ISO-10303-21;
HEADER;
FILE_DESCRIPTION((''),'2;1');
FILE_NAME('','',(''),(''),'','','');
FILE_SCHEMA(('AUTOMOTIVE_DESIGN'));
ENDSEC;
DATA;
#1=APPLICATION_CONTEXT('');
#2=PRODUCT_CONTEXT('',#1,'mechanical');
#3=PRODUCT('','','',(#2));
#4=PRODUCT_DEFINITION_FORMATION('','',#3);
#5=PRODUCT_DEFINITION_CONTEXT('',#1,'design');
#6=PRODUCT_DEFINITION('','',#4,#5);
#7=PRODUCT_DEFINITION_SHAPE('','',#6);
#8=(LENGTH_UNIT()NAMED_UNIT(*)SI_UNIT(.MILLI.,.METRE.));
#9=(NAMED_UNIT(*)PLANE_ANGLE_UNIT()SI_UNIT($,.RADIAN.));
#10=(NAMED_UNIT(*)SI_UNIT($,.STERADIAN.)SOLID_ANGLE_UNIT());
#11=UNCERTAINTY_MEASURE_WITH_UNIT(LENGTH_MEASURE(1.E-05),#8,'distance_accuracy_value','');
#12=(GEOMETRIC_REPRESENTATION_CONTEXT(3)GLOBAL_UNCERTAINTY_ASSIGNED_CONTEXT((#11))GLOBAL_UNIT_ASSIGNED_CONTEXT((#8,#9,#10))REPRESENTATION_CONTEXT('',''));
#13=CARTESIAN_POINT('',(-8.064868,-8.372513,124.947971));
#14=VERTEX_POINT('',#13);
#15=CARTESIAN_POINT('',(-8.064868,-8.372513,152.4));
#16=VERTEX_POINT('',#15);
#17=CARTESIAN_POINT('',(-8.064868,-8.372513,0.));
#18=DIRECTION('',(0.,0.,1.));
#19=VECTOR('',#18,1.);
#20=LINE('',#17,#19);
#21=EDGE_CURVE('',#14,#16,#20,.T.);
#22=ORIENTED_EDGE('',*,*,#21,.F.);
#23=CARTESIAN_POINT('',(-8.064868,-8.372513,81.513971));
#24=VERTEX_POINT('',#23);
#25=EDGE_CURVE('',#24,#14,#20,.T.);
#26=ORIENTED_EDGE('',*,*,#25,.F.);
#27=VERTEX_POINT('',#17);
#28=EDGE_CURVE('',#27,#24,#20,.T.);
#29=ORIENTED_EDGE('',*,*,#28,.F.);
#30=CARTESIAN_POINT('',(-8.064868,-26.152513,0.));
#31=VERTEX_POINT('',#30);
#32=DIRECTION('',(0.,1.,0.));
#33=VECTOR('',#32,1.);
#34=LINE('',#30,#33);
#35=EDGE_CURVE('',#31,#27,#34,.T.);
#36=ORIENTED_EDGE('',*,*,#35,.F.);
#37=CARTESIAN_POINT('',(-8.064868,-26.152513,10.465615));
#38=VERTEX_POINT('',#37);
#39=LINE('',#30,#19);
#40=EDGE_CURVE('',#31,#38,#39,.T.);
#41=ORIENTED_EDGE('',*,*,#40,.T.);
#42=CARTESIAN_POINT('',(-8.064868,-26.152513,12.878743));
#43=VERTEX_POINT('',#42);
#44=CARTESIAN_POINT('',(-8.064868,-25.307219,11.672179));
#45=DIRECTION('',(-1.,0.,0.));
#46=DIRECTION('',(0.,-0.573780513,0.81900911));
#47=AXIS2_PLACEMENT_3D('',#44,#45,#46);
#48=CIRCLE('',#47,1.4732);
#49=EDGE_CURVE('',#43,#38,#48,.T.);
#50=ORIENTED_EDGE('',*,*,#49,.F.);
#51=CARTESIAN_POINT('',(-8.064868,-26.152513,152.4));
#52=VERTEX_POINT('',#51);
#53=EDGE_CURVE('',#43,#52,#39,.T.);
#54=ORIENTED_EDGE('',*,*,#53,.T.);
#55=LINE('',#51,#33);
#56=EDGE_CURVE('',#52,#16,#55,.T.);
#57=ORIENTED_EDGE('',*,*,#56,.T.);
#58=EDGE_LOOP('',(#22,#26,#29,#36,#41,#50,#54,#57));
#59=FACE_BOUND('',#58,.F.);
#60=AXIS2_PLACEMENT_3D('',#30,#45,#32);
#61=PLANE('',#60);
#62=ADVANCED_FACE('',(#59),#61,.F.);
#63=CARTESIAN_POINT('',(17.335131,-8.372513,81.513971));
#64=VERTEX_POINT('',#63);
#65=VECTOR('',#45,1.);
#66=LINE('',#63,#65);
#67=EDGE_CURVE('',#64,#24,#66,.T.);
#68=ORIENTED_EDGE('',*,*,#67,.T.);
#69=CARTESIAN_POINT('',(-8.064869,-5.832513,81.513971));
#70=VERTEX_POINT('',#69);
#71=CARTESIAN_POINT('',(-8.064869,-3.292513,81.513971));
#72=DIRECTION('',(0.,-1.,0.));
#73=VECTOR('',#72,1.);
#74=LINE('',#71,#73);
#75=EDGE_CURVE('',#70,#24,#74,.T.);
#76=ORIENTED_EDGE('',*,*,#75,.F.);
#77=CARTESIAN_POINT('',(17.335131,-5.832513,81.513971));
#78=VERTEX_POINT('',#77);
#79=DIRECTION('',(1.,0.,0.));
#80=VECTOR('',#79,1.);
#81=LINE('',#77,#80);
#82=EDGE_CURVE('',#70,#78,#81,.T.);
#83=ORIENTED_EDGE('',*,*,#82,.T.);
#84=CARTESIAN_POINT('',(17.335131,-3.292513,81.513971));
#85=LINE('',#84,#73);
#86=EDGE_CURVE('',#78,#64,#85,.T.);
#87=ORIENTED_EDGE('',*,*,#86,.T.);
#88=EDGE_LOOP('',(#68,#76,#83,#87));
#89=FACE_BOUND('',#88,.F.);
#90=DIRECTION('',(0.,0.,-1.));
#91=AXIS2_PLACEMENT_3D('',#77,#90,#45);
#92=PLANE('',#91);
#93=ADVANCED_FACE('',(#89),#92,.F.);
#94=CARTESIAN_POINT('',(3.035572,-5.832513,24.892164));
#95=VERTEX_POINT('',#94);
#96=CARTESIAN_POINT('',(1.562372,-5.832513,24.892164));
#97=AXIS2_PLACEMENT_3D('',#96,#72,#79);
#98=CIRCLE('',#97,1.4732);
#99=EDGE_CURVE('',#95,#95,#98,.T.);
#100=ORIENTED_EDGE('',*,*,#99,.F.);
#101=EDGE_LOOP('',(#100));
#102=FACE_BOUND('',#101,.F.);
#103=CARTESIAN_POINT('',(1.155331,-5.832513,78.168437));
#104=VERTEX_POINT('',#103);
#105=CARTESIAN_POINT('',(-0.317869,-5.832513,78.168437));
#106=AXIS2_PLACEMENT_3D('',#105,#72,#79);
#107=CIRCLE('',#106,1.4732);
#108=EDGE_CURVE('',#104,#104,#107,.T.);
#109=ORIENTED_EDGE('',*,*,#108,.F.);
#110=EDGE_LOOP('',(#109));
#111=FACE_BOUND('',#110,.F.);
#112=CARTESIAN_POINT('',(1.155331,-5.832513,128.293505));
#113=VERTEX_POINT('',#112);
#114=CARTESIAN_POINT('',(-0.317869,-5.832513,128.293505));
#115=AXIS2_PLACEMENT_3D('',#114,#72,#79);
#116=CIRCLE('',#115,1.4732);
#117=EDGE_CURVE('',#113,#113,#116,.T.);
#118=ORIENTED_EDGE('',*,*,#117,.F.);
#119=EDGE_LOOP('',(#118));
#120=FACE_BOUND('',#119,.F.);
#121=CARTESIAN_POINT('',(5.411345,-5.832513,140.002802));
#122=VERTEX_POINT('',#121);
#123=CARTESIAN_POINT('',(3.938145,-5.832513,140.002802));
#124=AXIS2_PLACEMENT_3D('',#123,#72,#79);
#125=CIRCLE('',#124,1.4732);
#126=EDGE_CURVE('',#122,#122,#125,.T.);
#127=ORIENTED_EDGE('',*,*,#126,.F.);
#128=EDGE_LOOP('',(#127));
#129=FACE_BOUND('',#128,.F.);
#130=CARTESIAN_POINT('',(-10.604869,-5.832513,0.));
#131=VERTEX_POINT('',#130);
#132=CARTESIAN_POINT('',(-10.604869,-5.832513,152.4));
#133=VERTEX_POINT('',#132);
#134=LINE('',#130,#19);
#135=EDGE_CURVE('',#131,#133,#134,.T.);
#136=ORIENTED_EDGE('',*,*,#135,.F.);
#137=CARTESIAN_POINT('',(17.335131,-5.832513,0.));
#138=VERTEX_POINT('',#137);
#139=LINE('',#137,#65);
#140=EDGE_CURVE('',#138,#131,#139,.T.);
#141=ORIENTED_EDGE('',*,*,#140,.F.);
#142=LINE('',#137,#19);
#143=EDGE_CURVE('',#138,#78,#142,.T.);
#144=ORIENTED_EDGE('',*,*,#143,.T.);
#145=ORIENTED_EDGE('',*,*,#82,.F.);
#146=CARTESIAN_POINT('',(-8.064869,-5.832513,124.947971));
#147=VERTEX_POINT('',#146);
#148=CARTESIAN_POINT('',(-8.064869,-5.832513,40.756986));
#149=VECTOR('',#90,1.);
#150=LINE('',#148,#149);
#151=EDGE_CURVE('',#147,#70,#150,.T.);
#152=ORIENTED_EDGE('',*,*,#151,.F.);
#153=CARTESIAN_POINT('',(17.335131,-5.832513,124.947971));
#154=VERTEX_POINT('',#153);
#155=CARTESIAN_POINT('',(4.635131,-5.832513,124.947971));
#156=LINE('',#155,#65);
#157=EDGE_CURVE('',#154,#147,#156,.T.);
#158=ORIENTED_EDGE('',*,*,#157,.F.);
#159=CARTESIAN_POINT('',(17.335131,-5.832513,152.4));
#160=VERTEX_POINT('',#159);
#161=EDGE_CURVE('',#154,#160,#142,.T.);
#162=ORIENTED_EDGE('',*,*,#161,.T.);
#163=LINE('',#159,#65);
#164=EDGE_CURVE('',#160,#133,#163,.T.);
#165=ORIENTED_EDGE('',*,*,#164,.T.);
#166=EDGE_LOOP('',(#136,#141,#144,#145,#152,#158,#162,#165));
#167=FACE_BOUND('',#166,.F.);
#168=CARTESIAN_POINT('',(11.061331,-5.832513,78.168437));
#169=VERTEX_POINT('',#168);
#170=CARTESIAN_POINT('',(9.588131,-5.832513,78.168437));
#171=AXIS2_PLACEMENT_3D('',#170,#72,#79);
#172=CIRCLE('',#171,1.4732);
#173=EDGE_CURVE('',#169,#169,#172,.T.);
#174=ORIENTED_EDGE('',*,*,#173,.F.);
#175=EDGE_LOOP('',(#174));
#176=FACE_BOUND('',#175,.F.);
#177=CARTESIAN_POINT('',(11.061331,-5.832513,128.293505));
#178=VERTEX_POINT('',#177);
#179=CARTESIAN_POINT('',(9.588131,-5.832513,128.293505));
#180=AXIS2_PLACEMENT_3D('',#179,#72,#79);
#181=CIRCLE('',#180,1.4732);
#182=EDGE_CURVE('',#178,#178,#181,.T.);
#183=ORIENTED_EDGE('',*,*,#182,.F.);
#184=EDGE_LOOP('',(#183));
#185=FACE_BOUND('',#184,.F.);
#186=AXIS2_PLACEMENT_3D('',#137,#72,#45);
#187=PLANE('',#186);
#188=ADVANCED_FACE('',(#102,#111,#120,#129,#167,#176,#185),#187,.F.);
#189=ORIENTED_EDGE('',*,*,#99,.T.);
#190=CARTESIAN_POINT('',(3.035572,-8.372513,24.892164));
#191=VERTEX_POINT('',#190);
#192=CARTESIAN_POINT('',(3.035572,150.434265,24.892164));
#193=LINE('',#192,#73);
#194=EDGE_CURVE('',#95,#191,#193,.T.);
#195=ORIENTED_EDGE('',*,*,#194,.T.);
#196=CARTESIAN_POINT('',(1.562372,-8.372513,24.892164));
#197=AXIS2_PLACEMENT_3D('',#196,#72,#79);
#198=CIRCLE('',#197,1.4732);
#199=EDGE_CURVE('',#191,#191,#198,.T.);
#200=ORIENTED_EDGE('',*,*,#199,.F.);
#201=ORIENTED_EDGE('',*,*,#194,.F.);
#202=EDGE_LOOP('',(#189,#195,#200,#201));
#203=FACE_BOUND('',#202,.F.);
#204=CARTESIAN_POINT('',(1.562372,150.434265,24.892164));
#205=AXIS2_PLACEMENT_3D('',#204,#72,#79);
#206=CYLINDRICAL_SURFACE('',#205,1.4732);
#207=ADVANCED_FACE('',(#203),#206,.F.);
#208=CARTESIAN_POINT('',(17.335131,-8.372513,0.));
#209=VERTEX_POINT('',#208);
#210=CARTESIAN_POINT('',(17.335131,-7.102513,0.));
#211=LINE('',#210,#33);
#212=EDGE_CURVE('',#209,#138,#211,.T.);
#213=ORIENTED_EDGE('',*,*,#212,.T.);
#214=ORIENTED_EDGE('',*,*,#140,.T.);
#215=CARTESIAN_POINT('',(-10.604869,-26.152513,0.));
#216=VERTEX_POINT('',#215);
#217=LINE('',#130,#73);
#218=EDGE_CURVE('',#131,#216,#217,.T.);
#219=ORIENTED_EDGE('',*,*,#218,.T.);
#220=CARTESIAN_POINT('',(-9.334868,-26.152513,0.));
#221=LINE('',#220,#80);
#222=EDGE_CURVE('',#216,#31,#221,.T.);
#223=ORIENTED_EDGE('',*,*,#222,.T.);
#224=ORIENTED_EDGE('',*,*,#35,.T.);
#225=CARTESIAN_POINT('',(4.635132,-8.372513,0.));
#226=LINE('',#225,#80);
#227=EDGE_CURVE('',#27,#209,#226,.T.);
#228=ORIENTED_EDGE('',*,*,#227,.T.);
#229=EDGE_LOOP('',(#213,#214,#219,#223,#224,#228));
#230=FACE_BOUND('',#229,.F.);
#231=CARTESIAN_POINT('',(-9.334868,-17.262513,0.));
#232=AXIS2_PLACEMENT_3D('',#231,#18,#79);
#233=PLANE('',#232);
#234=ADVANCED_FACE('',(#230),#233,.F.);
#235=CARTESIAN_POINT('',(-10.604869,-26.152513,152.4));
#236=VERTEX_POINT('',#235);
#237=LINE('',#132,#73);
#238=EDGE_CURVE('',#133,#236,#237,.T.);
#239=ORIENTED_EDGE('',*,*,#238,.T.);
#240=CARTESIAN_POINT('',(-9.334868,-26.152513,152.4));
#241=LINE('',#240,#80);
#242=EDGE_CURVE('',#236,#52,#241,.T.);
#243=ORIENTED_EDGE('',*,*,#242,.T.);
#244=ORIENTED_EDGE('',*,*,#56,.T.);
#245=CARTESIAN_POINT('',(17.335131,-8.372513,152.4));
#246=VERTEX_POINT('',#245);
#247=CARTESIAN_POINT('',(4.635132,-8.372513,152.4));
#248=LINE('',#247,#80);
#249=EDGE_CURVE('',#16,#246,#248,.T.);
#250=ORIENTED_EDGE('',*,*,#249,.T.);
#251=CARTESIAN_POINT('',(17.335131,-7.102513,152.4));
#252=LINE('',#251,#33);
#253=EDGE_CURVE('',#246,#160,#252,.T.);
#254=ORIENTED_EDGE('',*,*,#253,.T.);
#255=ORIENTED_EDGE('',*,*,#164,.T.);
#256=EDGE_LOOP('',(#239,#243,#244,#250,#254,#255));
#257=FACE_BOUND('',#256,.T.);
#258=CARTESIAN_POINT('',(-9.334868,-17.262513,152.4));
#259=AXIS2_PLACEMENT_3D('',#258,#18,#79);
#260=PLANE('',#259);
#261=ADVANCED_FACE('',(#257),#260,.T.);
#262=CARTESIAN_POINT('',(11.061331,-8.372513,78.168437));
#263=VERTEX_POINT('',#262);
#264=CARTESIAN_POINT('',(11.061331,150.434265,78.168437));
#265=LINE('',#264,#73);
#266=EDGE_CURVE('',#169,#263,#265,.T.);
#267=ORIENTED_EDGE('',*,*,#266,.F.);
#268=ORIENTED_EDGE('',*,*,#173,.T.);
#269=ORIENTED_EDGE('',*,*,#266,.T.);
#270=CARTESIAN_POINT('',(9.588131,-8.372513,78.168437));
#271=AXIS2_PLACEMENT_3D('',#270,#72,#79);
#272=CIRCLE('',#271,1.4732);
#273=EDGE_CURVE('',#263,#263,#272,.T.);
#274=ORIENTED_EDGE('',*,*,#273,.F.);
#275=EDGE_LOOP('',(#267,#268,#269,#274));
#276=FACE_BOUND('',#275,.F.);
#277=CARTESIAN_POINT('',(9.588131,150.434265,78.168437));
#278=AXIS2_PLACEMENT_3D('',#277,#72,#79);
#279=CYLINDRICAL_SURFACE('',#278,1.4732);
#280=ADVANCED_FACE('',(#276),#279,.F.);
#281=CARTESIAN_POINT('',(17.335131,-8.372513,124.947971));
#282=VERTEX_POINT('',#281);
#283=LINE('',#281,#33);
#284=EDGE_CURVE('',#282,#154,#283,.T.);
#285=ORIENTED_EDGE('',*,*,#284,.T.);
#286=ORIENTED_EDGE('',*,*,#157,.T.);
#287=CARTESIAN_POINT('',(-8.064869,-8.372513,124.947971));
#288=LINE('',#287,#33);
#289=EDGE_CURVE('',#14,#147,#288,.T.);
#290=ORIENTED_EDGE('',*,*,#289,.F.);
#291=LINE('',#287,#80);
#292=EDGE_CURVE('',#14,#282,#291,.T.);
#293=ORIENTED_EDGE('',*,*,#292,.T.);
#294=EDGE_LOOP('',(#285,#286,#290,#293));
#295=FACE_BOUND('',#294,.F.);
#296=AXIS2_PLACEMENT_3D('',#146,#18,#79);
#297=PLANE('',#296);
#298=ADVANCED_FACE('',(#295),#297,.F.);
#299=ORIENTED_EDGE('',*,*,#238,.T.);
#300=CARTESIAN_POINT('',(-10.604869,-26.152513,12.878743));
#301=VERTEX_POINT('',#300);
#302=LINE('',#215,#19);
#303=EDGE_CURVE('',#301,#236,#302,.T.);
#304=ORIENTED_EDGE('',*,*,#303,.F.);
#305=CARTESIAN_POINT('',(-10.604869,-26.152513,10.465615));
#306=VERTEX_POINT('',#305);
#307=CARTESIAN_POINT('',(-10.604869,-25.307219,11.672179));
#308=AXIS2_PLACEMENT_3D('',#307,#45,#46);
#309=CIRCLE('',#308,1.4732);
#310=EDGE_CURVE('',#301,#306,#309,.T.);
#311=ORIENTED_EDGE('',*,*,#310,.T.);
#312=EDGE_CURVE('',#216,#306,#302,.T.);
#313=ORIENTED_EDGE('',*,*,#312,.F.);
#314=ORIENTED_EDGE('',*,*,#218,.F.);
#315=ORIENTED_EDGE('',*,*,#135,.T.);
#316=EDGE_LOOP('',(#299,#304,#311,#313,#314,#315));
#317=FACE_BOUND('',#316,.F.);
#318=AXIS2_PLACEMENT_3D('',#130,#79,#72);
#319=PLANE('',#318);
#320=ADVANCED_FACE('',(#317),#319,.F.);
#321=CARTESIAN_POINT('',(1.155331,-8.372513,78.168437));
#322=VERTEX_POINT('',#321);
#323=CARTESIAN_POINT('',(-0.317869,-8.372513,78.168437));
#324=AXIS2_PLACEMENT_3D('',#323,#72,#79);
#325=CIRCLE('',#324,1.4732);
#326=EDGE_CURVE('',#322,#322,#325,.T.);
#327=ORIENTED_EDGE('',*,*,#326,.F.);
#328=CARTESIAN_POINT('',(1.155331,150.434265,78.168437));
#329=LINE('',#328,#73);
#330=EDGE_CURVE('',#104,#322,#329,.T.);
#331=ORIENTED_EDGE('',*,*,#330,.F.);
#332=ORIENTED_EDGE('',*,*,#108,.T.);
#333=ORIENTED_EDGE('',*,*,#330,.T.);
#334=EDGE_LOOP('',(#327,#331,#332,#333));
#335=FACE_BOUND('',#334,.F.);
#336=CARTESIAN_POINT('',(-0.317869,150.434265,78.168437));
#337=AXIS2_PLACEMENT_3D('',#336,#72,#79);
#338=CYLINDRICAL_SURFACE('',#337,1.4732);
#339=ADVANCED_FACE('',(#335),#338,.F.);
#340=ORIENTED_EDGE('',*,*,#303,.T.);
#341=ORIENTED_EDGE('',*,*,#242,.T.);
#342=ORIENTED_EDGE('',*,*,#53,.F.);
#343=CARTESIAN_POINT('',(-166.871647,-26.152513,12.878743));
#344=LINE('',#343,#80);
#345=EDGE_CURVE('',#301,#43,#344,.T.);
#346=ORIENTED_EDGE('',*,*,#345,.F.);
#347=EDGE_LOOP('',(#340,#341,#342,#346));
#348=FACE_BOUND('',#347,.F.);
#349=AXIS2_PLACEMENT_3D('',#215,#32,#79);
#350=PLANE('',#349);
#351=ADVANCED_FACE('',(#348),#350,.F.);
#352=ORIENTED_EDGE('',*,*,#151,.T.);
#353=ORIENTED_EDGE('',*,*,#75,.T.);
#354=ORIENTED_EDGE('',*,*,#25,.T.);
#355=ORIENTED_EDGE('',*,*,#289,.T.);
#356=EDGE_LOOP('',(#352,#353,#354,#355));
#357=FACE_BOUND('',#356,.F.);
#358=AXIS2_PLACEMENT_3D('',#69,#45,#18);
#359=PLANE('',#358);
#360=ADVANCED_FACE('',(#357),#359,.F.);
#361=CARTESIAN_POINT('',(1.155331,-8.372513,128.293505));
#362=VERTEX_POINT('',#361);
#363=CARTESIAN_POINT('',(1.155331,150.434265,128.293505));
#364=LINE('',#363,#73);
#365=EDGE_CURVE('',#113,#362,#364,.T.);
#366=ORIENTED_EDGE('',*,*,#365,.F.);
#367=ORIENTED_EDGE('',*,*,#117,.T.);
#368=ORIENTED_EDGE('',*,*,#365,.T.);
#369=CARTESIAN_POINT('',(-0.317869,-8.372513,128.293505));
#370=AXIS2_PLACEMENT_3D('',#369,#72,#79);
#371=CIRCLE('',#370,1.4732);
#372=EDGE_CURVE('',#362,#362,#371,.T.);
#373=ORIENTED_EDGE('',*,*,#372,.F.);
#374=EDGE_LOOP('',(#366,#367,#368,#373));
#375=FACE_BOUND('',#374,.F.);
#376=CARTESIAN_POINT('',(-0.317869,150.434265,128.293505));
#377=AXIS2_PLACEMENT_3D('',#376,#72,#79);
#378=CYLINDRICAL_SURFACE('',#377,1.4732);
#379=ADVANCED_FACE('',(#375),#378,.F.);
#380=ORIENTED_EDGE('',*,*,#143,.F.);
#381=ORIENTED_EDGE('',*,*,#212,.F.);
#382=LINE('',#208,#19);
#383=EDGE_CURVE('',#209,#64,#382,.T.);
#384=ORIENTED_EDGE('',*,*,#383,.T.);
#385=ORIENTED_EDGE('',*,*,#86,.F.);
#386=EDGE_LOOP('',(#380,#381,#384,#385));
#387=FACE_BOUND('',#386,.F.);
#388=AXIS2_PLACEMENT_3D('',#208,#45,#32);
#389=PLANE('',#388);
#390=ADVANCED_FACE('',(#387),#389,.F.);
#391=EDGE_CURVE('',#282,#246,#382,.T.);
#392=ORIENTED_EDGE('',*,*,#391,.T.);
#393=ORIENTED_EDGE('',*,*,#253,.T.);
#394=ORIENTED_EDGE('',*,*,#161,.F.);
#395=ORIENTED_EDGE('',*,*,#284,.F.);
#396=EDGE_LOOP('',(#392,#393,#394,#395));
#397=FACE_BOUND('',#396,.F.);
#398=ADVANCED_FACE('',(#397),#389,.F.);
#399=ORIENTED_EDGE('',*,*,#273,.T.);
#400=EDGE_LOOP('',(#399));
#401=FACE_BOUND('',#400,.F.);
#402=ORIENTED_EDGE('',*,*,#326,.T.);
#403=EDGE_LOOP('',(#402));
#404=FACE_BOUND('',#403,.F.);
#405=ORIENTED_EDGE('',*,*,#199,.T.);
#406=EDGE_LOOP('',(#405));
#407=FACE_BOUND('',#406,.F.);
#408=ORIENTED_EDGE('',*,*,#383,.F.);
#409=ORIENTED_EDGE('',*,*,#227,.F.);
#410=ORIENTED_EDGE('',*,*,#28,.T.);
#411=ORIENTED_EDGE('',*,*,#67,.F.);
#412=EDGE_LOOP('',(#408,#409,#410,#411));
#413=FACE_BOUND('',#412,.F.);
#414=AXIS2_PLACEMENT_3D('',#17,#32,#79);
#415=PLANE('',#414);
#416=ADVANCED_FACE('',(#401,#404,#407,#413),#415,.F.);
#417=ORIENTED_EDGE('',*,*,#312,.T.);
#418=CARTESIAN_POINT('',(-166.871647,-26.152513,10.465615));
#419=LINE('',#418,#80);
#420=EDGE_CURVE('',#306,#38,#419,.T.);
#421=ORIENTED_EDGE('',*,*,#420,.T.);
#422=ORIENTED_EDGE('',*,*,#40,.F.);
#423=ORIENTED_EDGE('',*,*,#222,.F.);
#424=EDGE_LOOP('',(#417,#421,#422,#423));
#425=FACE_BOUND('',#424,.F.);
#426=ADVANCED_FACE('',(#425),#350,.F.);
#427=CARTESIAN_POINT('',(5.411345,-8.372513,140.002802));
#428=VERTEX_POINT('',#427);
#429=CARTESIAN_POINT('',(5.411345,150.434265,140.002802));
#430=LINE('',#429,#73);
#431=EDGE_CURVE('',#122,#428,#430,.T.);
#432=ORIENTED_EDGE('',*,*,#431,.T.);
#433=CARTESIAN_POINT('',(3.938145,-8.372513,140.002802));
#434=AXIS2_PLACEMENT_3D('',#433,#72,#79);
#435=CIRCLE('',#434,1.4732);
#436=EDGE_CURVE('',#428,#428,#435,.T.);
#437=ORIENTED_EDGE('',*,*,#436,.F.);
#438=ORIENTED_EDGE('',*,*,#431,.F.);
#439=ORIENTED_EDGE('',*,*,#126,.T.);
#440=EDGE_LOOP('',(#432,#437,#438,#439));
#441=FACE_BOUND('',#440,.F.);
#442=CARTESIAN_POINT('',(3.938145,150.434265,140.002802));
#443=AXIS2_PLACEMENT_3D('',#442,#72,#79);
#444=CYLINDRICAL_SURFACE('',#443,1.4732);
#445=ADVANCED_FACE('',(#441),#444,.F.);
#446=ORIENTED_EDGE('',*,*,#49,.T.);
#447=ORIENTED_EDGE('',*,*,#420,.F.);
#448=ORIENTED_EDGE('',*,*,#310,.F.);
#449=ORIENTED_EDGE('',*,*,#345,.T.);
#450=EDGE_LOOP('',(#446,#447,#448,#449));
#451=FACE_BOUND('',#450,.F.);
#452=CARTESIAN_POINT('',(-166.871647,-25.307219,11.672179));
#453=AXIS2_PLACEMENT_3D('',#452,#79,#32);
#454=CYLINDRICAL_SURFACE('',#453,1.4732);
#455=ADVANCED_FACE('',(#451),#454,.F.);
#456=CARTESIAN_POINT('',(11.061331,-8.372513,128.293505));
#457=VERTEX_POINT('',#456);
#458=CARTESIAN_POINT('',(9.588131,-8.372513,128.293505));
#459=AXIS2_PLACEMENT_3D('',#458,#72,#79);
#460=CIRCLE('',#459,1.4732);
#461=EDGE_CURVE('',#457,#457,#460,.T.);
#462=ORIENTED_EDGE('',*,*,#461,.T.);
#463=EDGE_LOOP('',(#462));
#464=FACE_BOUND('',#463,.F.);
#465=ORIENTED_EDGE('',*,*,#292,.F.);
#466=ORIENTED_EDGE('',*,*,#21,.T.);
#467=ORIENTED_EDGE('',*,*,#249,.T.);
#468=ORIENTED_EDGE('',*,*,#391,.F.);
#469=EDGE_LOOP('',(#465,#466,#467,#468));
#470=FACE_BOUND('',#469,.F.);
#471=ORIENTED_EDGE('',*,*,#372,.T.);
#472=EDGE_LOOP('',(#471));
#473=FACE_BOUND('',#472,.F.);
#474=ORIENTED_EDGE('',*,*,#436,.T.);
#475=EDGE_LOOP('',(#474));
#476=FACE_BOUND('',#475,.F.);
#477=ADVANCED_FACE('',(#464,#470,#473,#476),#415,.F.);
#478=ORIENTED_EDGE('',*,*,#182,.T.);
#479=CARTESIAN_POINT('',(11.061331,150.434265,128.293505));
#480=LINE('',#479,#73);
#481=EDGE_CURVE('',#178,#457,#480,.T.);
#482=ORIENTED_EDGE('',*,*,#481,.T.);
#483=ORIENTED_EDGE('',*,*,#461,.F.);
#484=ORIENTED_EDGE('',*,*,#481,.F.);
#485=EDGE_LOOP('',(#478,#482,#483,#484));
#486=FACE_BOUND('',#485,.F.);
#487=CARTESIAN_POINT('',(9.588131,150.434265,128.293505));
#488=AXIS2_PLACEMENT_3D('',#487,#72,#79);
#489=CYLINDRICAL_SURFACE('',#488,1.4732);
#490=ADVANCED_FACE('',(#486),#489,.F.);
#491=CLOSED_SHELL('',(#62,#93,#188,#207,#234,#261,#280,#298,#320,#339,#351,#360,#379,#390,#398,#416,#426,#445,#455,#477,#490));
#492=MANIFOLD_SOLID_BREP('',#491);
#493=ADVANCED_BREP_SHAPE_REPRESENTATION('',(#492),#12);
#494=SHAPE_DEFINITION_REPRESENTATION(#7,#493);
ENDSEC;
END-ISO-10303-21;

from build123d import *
from build123d import SkipClean  # not in build123d's __all__

# Parameters (mm, degrees)
F0_W     = 2.5400003581
F0_H     = 17.78
F0_H_2   = 2.54
F0_W_2   = 25.3999996419
F1_DEPTH = 152.4
F4_D     = 2.9464
F2_W     = 12.7
F2_H     = 21.717
F5_DEPTH = 2.54
F6_D     = 2.9464
F7_D     = 2.9464
F8_D     = 2.9464
F9_D     = 2.9464
F10_D    = 2.9464
F11_D    = 2.9464


# Not quite as in the source:
# - after a boolean that leaves OpenCascade's solid faulty, fix() repairs it
# - a feature names something its author has since deleted; it is built from what else it names


with BuildPart() as f1:
    # F0 (on Top) → F1 (new body)
    with BuildSketch(Plane.XY):
        with Locations((-9.334868336, -17.2625129279)):
            Rectangle(F0_W, F0_H)
        with Locations((-9.334868336, -7.1025129279)):
            Rectangle(F0_W, F0_H_2)
        with Locations((4.635131664, -7.1025129279)):
            Rectangle(F0_W_2, F0_H_2)
    extrude(amount=F1_DEPTH)

    # F4 (through all)
    with Locations(Plane(origin=(0, -5.8325129279, 0), x_dir=(-1, 0, 0), z_dir=(0, 1, 0))):
        with Locations((0.317868515, 78.1684368849)):
            Hole(F4_D / 2)

    # F2 (on face) → F5 (cut, symmetric)
    with BuildSketch(Plane(origin=(0, -5.8325129279, 0), x_dir=(-1, 0, 0), z_dir=(0, 1, 0))):
        with Locations((1.714868515, 114.0894710903)):
            Rectangle(F2_W, F2_H)
        with Locations((1.714868515, 92.3724710903)):
            Rectangle(F2_W, F2_H)
        with Locations((-10.985131485, 114.0894710903)):
            Rectangle(F2_W, F2_H)
        with Locations((-10.985131485, 92.3724710903)):
            Rectangle(F2_W, F2_H)
    with SkipClean():  # cleaning this boolean's faces spoils the solid; the shape is the same uncleaned
        extrude(amount=F5_DEPTH, both=True, mode=Mode.SUBTRACT)

    # F6 (through all)
    with Locations(Plane(origin=(0, -5.8325129279, 0), x_dir=(-1, 0, 0), z_dir=(0, 1, 0))):
        with Locations((0.317868515, 128.2935052958)):
            Hole(F6_D / 2)

    add(f1.part.fix(), mode=Mode.REPLACE)

    # F7 (through all)
    with Locations(Plane(origin=(0, -5.8325129279, 0), x_dir=(-1, 0, 0), z_dir=(0, 1, 0))):
        with Locations((-9.588131485, 128.2935052958)):
            Hole(F7_D / 2)

    # F8 (through all)
    with Locations(Plane(origin=(0, -5.8325129279, 0), x_dir=(-1, 0, 0), z_dir=(0, 1, 0))):
        with Locations((-9.588131485, 78.1684368849)):
            Hole(F8_D / 2)

    # F9 (through all)
    with Locations(Plane(origin=(0, -5.8325129279, 0), x_dir=(-1, 0, 0), z_dir=(0, 1, 0))):
        with Locations((-3.9381445386, 140.0028020144)):
            Hole(F9_D / 2)

    # F10 (through all)
    with Locations(Plane(origin=(0, -5.8325129279, 0), x_dir=(-1, 0, 0), z_dir=(0, 1, 0))):
        with Locations((-1.56237185, 24.8921643943)):
            Hole(F10_D / 2)

    # F11 (through all)
    with Locations(Plane(origin=(-10.604868515, 0, 0), x_dir=(0, -1, 0), z_dir=(-1, 0, 0))):
        with Locations((25.3072194755, 11.6721792147)):
            Hole(F11_D / 2)


solid = f1.part
